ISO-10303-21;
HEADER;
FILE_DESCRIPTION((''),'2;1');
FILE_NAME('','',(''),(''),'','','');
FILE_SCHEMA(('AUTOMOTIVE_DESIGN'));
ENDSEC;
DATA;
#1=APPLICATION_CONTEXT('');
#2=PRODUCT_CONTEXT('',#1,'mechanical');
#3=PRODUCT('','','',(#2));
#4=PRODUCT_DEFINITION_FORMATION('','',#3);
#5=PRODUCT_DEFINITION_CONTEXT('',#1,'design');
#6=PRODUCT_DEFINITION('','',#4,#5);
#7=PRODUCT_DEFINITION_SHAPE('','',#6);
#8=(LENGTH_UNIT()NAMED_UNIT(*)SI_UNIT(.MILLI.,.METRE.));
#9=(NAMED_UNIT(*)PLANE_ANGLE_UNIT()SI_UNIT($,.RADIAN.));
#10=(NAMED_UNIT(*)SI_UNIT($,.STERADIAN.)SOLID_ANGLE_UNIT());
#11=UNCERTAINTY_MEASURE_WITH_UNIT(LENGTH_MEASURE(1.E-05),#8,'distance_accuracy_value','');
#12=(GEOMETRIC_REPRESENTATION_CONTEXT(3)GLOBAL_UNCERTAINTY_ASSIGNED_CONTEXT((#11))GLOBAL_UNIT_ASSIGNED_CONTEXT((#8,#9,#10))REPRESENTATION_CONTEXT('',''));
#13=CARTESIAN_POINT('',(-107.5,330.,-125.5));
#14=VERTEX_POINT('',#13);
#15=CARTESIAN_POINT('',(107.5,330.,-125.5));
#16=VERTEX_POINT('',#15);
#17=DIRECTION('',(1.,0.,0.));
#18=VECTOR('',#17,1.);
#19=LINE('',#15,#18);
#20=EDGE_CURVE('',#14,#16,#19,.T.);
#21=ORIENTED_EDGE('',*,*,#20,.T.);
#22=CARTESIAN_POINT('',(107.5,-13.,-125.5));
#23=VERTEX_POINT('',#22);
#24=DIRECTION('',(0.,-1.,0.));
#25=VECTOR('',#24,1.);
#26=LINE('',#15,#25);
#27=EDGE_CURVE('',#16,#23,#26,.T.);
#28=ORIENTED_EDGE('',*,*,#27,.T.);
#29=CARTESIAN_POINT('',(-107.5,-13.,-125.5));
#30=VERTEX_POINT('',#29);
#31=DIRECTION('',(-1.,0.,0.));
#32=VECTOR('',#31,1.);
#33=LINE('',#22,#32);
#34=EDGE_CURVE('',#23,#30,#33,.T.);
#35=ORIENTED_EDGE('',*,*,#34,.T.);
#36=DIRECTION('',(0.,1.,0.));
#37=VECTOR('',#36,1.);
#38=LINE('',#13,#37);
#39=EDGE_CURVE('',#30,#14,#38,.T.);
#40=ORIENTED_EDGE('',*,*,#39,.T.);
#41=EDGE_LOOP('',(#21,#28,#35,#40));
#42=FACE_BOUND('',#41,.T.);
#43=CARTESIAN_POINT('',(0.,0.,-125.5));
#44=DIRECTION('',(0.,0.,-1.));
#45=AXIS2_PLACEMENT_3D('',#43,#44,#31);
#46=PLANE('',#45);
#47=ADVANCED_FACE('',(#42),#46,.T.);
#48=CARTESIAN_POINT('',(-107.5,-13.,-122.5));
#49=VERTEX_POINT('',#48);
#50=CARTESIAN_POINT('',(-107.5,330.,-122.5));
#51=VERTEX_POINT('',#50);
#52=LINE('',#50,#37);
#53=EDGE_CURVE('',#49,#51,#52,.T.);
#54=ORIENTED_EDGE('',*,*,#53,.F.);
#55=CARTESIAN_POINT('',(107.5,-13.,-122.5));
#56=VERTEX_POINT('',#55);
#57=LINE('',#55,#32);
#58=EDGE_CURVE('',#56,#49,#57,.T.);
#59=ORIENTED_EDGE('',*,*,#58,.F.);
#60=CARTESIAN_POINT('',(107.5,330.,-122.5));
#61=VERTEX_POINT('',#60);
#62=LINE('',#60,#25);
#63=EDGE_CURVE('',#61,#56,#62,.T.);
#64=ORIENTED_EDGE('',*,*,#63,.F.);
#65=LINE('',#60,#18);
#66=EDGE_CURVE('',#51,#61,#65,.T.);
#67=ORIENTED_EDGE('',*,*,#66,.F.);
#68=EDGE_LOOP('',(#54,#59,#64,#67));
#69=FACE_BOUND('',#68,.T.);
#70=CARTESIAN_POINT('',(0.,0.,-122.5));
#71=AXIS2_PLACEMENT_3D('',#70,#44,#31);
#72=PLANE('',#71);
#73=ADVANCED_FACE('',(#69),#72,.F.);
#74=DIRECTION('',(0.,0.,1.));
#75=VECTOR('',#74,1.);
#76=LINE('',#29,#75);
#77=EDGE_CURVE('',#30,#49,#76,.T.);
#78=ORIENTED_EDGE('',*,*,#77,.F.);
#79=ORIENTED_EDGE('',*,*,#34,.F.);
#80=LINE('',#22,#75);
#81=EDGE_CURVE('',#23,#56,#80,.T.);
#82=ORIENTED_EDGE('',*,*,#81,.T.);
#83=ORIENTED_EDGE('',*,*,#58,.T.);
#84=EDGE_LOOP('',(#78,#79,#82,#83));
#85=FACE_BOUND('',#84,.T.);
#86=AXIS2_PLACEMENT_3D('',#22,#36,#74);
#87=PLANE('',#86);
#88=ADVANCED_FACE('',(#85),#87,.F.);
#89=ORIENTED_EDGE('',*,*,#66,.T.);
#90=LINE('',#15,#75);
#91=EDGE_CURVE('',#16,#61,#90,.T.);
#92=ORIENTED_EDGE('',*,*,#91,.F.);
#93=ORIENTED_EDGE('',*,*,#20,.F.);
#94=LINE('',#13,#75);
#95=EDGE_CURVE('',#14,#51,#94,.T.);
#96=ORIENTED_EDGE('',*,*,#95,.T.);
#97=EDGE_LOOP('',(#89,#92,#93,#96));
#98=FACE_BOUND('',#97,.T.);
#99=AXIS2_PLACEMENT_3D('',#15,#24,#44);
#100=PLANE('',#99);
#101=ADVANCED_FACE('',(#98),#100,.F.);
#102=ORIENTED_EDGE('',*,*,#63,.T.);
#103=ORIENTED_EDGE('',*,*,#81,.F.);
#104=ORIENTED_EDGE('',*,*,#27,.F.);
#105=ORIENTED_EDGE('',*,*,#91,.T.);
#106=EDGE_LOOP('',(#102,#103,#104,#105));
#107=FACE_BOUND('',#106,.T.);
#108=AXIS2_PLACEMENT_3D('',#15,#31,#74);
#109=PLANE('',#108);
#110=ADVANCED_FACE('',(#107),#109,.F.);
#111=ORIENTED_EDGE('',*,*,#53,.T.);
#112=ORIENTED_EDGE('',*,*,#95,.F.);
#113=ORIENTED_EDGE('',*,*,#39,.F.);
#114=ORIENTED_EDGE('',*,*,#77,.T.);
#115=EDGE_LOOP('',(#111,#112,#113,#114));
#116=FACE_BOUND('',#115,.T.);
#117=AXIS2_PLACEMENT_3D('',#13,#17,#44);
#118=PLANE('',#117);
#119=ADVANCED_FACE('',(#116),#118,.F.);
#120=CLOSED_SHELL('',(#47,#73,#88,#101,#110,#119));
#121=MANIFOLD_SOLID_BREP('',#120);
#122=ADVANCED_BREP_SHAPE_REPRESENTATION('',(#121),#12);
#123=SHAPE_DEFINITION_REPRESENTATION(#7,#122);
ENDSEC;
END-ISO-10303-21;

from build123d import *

# Parameters (mm, degrees)
SKETCH1_W          = 215
SKETCH1_H          = 343
BASE_FLANGE1_DEPTH = 3


# Sheet-metal steps are written as plain solids
with BuildPart() as part:
    # Sketch1 → Base-Flange1 (new body)
    with BuildSketch(Plane(origin=(0, 0, -122.5), x_dir=(-1, 0, 0), z_dir=(0, 0, -1))):
        with Locations((0, 158.5)):
            Rectangle(SKETCH1_W, SKETCH1_H)
    extrude(amount=BASE_FLANGE1_DEPTH)


solid = part.part
